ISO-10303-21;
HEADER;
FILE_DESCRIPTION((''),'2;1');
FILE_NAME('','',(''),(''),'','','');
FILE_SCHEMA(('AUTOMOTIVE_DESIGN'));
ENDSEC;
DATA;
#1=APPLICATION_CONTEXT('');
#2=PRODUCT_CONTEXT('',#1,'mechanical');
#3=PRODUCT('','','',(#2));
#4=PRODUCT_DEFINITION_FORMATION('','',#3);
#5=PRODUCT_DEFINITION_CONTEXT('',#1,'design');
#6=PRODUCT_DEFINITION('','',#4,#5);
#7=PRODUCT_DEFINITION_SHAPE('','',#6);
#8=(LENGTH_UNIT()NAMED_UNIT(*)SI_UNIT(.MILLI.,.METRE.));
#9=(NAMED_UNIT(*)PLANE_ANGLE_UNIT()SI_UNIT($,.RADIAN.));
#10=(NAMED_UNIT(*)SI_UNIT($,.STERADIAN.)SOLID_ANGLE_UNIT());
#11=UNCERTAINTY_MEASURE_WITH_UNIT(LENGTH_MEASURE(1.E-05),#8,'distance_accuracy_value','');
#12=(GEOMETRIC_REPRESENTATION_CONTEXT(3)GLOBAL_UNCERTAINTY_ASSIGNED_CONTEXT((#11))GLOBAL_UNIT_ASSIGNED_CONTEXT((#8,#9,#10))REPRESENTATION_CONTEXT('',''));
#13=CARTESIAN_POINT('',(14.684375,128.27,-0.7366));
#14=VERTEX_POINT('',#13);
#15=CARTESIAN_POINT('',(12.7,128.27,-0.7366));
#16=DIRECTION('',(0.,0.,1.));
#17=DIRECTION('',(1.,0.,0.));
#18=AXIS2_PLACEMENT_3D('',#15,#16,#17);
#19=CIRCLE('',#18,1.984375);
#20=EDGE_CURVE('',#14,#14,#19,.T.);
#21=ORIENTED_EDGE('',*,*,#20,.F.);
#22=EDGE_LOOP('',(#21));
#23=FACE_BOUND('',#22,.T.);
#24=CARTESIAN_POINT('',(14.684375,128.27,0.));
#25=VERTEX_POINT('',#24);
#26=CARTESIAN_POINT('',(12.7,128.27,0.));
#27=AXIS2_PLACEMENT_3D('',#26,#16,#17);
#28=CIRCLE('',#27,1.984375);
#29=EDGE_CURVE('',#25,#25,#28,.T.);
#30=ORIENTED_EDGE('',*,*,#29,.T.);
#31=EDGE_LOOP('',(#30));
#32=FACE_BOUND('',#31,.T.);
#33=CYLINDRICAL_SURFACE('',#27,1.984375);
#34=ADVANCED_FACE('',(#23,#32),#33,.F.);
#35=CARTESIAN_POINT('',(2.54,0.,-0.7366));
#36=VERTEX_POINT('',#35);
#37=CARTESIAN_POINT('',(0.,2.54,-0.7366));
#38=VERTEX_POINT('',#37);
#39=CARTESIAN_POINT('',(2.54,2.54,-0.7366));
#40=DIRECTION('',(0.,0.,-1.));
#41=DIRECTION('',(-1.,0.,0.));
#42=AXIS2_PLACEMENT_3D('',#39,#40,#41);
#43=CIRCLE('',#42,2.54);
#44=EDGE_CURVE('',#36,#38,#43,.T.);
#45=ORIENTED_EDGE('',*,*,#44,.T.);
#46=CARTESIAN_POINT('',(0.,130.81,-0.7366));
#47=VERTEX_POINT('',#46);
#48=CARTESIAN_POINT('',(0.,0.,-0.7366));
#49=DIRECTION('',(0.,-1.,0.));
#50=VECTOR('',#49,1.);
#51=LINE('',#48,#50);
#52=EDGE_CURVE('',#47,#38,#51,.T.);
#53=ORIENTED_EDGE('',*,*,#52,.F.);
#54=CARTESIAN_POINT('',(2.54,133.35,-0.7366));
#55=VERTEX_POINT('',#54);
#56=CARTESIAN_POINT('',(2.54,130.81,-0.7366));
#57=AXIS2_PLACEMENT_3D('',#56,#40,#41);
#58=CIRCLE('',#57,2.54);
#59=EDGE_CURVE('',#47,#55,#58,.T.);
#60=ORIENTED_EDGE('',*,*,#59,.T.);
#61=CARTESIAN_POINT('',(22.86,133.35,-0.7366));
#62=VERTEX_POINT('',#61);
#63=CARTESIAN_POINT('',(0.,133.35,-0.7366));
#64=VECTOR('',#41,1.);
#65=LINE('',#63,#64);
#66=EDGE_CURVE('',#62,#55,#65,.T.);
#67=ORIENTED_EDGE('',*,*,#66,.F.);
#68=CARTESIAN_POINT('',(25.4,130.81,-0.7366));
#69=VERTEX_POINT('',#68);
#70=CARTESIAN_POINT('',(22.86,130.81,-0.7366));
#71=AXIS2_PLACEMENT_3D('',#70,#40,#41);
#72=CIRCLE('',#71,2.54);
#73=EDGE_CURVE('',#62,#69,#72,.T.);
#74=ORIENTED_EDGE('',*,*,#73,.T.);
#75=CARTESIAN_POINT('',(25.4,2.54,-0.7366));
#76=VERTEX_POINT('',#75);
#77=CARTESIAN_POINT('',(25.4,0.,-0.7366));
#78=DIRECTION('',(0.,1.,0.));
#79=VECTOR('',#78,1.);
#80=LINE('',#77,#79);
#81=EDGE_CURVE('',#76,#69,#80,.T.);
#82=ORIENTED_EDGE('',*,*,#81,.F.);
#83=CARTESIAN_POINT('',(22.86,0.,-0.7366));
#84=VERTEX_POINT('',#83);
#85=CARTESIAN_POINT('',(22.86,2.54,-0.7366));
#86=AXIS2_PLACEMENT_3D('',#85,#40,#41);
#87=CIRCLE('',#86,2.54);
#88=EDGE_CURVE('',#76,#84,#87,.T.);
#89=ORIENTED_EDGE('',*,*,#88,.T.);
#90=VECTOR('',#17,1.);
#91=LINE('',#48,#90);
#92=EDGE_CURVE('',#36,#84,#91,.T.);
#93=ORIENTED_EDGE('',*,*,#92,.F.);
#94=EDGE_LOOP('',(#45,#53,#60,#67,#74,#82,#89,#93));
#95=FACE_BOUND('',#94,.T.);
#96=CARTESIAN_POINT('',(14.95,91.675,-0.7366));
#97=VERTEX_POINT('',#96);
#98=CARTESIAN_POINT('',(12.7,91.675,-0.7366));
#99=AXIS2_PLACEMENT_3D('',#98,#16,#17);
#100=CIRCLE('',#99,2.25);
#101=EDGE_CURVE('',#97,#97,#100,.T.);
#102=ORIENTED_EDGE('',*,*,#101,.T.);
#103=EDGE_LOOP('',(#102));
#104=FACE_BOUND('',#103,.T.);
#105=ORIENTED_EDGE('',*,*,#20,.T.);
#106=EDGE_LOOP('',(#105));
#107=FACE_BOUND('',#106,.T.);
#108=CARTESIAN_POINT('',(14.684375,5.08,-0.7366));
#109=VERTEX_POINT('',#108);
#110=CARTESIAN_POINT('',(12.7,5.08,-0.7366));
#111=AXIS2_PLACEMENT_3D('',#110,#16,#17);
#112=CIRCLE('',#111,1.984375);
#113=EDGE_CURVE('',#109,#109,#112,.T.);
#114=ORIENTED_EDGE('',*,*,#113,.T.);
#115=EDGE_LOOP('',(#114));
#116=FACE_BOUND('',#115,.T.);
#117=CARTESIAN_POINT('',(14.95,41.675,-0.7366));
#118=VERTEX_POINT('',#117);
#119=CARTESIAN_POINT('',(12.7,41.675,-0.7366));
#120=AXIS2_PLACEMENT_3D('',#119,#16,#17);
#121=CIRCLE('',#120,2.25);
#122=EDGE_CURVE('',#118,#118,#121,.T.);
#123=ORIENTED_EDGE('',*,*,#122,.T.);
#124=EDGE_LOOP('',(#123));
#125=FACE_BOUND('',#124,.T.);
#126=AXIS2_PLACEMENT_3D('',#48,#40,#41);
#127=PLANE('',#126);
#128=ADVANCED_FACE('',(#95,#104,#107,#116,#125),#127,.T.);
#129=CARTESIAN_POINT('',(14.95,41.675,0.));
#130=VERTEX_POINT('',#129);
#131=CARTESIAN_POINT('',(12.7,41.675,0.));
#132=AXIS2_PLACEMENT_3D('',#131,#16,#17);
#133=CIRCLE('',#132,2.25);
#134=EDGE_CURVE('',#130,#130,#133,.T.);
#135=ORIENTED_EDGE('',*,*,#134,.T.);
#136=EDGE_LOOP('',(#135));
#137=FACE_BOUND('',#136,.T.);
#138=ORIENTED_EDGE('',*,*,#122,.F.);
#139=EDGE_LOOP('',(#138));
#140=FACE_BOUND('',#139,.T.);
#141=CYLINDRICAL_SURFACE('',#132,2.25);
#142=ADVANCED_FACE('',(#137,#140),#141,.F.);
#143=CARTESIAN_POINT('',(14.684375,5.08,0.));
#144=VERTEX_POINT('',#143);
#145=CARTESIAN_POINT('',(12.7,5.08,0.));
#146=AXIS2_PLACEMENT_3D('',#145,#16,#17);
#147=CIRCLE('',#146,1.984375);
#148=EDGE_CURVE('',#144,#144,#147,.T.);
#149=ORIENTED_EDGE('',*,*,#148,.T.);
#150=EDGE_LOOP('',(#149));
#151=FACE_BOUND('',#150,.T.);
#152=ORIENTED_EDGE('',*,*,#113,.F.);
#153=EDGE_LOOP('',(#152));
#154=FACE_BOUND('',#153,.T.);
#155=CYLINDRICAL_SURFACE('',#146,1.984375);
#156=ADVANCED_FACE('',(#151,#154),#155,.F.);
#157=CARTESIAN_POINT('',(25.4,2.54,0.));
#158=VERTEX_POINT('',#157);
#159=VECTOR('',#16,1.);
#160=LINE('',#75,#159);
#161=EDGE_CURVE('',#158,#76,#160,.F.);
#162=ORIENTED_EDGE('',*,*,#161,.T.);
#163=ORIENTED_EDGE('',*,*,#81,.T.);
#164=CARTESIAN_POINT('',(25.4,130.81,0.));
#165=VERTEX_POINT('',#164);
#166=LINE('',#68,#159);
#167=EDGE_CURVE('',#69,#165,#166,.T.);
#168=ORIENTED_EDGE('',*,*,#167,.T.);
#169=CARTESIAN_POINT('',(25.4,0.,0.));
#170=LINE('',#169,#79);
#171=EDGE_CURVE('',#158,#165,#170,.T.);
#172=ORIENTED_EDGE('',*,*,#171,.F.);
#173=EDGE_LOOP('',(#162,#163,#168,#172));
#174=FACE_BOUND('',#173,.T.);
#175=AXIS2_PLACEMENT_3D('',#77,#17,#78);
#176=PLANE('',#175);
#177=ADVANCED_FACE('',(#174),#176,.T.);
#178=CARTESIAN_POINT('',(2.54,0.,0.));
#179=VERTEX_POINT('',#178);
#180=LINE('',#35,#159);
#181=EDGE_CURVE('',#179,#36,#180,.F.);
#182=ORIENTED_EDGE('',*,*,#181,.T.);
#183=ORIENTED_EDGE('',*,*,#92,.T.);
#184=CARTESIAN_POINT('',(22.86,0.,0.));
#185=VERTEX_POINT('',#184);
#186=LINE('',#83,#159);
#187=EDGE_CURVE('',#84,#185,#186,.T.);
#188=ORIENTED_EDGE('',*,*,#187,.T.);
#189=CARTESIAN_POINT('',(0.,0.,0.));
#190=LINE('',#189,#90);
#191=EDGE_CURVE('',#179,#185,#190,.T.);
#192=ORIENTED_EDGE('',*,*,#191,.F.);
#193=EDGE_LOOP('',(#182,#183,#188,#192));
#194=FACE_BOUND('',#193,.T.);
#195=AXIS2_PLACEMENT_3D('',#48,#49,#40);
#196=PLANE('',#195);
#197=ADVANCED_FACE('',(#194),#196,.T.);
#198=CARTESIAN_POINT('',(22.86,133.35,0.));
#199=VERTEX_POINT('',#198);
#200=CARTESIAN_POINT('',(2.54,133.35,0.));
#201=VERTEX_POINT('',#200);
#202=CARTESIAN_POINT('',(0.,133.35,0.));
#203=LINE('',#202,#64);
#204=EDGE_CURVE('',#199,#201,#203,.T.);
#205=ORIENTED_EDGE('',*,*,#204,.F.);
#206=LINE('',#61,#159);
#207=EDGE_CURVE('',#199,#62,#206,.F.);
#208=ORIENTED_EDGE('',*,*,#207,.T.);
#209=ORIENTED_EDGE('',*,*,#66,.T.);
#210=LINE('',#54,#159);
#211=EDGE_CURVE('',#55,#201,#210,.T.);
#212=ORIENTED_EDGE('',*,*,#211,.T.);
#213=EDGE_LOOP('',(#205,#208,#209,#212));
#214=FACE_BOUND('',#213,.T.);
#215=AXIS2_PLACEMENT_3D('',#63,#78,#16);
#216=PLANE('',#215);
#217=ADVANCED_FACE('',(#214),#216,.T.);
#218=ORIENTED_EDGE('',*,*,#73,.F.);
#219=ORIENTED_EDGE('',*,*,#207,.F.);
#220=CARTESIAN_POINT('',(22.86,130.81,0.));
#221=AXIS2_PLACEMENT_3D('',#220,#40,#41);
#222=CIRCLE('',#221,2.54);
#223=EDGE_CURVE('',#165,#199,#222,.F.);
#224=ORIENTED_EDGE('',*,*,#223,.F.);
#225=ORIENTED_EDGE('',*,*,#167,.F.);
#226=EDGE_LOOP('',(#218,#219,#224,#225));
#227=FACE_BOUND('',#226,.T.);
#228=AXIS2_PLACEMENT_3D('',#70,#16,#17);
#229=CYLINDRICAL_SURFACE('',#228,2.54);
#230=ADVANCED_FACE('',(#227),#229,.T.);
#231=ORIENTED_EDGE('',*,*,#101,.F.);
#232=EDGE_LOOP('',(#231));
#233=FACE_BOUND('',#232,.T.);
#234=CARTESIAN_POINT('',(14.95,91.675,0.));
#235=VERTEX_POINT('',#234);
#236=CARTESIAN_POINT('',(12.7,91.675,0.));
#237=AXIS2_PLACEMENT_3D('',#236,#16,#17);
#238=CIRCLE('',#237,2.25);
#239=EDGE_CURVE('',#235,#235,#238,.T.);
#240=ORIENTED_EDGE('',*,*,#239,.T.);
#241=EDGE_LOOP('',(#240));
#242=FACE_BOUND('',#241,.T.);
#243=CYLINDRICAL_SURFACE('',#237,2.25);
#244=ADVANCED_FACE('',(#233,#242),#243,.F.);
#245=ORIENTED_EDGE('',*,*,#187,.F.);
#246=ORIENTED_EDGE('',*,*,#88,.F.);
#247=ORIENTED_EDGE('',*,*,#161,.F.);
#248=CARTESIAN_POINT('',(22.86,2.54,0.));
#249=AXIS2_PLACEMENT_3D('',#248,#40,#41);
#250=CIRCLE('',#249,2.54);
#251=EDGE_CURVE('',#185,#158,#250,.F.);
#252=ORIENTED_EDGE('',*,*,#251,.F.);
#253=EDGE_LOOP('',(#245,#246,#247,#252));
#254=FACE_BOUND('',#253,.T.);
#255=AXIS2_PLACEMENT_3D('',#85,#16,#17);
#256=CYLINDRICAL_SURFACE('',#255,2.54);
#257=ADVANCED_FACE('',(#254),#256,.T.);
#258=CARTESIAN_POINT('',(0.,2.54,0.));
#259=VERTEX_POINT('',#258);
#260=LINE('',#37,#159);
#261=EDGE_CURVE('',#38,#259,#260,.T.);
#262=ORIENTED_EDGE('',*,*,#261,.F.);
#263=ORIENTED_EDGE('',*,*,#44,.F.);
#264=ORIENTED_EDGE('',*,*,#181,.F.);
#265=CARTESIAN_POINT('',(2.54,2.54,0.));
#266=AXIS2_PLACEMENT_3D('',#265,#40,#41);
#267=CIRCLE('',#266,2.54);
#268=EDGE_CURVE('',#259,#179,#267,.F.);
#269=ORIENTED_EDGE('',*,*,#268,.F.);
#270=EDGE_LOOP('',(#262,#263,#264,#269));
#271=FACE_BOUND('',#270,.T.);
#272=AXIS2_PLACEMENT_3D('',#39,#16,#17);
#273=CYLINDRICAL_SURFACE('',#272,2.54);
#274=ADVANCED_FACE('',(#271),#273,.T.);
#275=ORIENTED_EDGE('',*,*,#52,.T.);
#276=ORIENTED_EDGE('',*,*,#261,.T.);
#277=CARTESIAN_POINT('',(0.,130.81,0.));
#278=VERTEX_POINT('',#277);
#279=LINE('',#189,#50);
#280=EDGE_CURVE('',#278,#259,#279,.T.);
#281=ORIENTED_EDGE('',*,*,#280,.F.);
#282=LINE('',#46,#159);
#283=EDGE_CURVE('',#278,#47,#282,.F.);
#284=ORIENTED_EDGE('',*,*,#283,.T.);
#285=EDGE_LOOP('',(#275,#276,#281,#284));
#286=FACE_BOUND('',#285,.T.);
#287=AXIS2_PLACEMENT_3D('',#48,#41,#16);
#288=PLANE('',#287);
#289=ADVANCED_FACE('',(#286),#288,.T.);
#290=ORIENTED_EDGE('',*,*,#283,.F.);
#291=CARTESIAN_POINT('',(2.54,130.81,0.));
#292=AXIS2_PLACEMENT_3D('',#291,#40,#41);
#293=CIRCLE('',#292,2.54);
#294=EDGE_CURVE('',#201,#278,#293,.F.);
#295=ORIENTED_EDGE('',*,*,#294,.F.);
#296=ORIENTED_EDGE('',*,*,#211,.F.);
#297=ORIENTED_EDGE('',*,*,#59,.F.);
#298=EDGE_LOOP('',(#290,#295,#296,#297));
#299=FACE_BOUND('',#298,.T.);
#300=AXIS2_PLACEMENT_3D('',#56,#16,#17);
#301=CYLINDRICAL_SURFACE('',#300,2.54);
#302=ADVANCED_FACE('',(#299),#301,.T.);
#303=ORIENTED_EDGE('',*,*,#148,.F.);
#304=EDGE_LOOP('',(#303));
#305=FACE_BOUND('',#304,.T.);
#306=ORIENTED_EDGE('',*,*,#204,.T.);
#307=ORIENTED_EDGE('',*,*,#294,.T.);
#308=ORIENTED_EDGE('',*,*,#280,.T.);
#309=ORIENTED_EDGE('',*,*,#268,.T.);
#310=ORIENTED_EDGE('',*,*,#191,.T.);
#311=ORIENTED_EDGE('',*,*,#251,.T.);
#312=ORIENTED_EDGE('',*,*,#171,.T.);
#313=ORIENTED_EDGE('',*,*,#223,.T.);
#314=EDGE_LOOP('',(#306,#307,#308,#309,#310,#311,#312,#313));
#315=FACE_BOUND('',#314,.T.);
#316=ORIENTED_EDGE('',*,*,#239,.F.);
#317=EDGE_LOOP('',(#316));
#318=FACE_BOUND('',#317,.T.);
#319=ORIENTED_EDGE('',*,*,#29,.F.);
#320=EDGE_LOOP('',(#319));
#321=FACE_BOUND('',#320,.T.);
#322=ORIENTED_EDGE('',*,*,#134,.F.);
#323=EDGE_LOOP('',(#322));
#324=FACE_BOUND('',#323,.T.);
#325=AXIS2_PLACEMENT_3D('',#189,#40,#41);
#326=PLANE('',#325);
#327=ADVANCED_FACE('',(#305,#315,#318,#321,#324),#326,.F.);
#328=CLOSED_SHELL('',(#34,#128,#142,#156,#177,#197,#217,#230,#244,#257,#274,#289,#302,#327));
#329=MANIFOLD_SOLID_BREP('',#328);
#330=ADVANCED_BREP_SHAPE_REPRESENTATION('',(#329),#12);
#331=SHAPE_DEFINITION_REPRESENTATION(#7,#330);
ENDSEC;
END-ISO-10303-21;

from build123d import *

# Parameters (mm, degrees)
SKETCH1_W                       = 25.4
SKETCH1_H                       = 133.35
BASE_FLANGE1_DEPTH              = 0.7366
BREAK_CORNER1_START             = -0.7366
BREAK_CORNER1_DEPTH             = 0.7366
M4_CLEARANCE_HOLE2_D            = 4.5
F_5_32_0_15625_DIAMETER_HOLE2_D = 3.96875


# Read off the part's stored shape, not the designer's step: Break-Corner1
# Sheet-metal steps are written as plain solids
with BuildPart() as part:
    # Sketch1 → Base-Flange1 (new body)
    with BuildSketch(Plane.XY):
        with Locations((12.7, 66.675)):
            Rectangle(SKETCH1_W, SKETCH1_H)
    extrude(amount=-BASE_FLANGE1_DEPTH)

    # Break-Corner1 outline → Break-Corner1 (cut)
    with BuildSketch(Plane.XY.offset(BREAK_CORNER1_START)):
        with BuildLine():
            ThreePointArc((2.54, 0), (0.743948776, 0.743948776), (0, 2.54))
            Line((0, 2.54), (0, 0))
            Line((0, 0), (2.54, 0))
        make_face()
        with BuildLine():
            Line((0, 133.35), (0, 130.81))
            ThreePointArc((0, 130.81), (0.743948776, 132.606051224), (2.54, 133.35))
            Line((2.54, 133.35), (0, 133.35))
        make_face()
        with BuildLine():
            ThreePointArc((25.4, 2.54), (24.656051224, 0.743948776), (22.86, 0))
            Line((22.86, 0), (25.4, 0))
            Line((25.4, 0), (25.4, 2.54))
        make_face()
        with BuildLine():
            Line((25.4, 133.35), (22.86, 133.35))
            ThreePointArc((22.86, 133.35), (24.656051224, 132.606051224), (25.4, 130.81))
            Line((25.4, 130.81), (25.4, 133.35))
        make_face()
    extrude(amount=BREAK_CORNER1_DEPTH, mode=Mode.SUBTRACT)

    # M4 Clearance Hole2 (through all)
    with Locations(Plane.XY):
        with Locations((12.7, 91.675), (12.7, 41.675)):
            Hole(M4_CLEARANCE_HOLE2_D / 2)

    # 5/32 (0.15625) Diameter Hole2 (through all)
    with Locations(Plane.XY):
        with Locations((12.7, 5.08), (12.7, 128.27)):
            Hole(F_5_32_0_15625_DIAMETER_HOLE2_D / 2)


solid = part.part
